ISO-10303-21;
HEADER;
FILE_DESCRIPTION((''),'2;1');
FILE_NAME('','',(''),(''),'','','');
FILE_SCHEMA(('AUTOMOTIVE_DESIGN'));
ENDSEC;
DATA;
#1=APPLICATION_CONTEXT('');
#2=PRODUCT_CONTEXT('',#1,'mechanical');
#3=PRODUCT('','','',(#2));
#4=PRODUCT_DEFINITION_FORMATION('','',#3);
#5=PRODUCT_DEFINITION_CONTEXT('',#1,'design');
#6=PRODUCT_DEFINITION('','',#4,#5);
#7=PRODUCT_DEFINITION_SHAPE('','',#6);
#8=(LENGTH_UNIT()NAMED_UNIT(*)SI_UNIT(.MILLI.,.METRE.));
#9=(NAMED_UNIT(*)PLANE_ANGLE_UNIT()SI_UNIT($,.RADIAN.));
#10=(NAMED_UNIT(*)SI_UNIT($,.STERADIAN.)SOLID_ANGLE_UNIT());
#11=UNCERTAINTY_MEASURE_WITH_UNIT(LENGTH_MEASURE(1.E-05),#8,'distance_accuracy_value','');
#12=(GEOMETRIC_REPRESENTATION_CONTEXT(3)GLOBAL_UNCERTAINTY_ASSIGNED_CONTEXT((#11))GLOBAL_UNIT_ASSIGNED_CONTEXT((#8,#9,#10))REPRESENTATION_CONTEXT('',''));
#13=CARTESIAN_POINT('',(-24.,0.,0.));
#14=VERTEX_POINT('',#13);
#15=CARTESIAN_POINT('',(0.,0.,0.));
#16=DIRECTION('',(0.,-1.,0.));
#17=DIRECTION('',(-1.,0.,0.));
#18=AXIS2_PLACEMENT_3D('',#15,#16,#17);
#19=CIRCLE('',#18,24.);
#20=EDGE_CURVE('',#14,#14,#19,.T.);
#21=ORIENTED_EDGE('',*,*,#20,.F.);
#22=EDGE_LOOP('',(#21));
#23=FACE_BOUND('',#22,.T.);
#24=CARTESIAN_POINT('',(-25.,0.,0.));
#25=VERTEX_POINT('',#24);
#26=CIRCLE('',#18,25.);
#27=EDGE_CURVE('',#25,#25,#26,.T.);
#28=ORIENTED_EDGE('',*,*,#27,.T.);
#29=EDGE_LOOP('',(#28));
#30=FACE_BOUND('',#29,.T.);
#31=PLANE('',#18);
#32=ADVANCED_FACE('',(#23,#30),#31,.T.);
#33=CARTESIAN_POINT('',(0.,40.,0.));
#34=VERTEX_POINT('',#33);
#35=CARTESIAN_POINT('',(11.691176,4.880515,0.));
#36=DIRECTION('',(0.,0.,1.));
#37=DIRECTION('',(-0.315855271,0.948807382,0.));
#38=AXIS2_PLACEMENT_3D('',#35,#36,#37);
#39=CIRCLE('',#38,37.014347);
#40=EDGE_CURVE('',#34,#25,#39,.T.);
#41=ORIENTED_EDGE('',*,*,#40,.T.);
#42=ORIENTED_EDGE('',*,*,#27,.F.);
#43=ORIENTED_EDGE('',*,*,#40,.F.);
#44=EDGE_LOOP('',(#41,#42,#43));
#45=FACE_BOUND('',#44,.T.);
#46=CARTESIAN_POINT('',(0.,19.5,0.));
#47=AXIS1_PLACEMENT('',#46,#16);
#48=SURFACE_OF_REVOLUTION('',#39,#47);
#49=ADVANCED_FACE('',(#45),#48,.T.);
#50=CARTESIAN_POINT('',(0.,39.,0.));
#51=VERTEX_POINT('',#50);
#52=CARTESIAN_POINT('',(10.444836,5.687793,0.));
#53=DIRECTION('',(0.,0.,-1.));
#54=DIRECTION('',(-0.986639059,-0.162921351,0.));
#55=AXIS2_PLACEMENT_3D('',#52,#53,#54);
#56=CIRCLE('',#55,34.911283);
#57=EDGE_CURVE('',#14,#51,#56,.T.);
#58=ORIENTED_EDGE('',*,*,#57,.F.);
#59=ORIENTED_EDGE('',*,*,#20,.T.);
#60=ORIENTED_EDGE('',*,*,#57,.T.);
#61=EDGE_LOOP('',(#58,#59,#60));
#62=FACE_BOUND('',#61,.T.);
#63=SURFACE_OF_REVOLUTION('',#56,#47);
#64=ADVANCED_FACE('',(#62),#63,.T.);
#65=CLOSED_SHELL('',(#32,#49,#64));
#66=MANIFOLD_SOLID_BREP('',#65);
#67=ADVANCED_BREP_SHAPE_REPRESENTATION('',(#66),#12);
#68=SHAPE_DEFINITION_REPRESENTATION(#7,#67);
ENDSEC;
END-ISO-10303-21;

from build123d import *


# Not quite as in the source:
# - a feature names something its author has since deleted; it is built from what else it names


with BuildPart() as f1:
    # F0 (on Top) → F1 (revolve)
    with BuildSketch(Plane.XY):
        with BuildLine():
            ThreePointArc((0, 40), (-19.6969266743, 24.4980791714), (-25, 0))
            Line((-25, 0), (-24, 0))
            ThreePointArc((-24, 0), (-19.2876490579, 23.9847071126), (0, 39))
            Line((0, 39), (0, 40))
        make_face()
    revolve(axis=Axis((0, 19.5, 0), (0, -1, 0)))


solid = f1.part
